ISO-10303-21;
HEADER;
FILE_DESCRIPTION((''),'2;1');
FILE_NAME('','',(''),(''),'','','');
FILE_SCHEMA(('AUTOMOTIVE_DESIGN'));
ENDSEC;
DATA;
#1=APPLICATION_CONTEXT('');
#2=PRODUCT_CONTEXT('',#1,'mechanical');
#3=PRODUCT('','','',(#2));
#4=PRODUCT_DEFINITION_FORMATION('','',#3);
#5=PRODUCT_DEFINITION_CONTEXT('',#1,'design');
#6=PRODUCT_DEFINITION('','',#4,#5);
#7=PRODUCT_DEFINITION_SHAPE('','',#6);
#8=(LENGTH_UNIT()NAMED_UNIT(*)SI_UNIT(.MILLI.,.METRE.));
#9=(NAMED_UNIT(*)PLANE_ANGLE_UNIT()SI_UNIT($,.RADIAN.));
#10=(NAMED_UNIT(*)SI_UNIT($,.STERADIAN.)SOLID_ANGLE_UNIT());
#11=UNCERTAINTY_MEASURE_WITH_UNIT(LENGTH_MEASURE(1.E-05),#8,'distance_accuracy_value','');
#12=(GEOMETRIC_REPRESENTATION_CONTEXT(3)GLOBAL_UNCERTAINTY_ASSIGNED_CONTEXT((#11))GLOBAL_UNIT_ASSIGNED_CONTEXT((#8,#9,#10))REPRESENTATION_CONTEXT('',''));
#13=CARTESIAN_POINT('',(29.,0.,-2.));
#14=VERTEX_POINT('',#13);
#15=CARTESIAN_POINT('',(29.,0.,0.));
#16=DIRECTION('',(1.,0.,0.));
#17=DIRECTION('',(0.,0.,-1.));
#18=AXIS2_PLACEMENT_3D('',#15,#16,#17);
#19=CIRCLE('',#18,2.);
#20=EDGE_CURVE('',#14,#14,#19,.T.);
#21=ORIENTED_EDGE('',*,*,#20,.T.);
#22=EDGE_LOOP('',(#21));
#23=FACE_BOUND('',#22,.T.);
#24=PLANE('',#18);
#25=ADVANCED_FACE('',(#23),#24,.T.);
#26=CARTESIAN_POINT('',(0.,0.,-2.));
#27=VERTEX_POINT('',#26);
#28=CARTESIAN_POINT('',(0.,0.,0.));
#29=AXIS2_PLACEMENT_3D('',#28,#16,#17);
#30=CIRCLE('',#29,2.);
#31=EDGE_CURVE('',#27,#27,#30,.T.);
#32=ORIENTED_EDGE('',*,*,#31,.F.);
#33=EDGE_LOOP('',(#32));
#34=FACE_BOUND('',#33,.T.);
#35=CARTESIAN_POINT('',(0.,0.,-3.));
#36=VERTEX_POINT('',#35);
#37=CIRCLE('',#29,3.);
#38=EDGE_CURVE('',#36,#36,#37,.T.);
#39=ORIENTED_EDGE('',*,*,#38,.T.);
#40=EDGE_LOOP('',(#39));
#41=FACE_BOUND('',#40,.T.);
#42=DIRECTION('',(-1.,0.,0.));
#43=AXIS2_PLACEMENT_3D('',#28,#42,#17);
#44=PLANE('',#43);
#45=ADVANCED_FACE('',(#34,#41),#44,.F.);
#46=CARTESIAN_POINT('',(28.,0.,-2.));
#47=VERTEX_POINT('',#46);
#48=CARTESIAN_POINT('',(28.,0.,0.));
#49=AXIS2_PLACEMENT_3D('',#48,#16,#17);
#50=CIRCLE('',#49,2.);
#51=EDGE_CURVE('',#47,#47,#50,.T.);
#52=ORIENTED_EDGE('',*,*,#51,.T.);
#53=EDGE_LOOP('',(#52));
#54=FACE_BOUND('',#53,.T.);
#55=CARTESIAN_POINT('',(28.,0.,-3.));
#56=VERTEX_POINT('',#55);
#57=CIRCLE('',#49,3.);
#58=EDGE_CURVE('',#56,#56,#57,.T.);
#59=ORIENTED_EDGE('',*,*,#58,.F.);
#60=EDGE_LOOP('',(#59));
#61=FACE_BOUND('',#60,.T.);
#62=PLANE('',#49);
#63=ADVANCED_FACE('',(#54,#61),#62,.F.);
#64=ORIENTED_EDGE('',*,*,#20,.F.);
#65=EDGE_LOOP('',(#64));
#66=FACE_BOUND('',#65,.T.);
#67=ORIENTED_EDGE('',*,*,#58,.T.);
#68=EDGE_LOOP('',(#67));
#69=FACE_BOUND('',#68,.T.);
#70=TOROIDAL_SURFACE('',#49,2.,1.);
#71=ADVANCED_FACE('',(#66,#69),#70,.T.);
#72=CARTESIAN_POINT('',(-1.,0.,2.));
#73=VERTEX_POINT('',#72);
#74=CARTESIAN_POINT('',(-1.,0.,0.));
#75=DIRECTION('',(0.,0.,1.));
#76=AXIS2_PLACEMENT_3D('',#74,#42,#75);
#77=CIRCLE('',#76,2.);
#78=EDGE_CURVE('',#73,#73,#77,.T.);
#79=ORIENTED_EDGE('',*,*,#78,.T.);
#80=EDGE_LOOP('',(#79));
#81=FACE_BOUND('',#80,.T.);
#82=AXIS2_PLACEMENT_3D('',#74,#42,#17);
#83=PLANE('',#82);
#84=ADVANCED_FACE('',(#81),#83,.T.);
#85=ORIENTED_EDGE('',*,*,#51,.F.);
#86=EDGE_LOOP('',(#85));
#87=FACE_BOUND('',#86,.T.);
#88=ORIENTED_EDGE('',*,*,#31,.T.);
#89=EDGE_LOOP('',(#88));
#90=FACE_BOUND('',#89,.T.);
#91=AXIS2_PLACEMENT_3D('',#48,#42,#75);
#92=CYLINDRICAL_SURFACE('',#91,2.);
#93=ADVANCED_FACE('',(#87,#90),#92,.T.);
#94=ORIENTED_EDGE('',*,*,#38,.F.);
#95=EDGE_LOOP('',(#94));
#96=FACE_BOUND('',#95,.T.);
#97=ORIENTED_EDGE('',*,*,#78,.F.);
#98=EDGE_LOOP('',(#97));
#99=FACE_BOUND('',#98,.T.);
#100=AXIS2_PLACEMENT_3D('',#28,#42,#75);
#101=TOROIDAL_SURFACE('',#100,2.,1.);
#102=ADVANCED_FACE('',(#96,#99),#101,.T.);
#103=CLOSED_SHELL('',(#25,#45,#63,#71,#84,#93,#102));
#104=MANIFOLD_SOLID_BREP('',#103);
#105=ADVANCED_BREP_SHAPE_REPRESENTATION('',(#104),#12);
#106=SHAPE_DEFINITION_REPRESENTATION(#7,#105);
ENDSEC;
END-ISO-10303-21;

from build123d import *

# Parameters (mm, degrees)
SKETCH2_R            = 2
BOSS_EXTRUDE1_DEPTH  = 28
SKETCH3_R            = 3
BOSS_EXTRUDE2_DEPTH  = 1
FILLET1_R            = 1
FILLET1_OF_MIRROR1_R = 1


with BuildPart() as part:
    # Sketch2 → Boss-Extrude1 (new body)
    with BuildSketch(Plane(origin=(0, 0, 0), x_dir=(0, 0, -1), z_dir=(1, 0, 0))):
        Circle(SKETCH2_R)
    extrude(amount=BOSS_EXTRUDE1_DEPTH)

    # Sketch3 → Boss-Extrude2 (add)
    with BuildSketch(Plane(origin=(28, 0, 0), x_dir=(0, 0, -1), z_dir=(1, 0, 0))):
        Circle(SKETCH3_R)
    boss_extrude2 = extrude(amount=BOSS_EXTRUDE2_DEPTH)

    # Fillet1
    fillet1_edges = [part.edges().sort_by_distance(p)[0] for p in [
        (29, 0, 3),
    ]]
    fillet(fillet1_edges, radius=FILLET1_R - 0.0001)  # a hair under: the kernel refuses the full size

    # Mirror1: Boss-Extrude2 across plane
    add(boss_extrude2.mirror(Plane.ZY.offset(-14)))

    # Fillet1 of Mirror1
    fillet1_of_mirror1_edges = [part.edges().sort_by_distance(p)[0] for p in [
        (-1, 0, 3),
    ]]
    fillet(fillet1_of_mirror1_edges, radius=FILLET1_OF_MIRROR1_R - 0.0001)  # a hair under: the kernel refuses the full size


solid = part.part
